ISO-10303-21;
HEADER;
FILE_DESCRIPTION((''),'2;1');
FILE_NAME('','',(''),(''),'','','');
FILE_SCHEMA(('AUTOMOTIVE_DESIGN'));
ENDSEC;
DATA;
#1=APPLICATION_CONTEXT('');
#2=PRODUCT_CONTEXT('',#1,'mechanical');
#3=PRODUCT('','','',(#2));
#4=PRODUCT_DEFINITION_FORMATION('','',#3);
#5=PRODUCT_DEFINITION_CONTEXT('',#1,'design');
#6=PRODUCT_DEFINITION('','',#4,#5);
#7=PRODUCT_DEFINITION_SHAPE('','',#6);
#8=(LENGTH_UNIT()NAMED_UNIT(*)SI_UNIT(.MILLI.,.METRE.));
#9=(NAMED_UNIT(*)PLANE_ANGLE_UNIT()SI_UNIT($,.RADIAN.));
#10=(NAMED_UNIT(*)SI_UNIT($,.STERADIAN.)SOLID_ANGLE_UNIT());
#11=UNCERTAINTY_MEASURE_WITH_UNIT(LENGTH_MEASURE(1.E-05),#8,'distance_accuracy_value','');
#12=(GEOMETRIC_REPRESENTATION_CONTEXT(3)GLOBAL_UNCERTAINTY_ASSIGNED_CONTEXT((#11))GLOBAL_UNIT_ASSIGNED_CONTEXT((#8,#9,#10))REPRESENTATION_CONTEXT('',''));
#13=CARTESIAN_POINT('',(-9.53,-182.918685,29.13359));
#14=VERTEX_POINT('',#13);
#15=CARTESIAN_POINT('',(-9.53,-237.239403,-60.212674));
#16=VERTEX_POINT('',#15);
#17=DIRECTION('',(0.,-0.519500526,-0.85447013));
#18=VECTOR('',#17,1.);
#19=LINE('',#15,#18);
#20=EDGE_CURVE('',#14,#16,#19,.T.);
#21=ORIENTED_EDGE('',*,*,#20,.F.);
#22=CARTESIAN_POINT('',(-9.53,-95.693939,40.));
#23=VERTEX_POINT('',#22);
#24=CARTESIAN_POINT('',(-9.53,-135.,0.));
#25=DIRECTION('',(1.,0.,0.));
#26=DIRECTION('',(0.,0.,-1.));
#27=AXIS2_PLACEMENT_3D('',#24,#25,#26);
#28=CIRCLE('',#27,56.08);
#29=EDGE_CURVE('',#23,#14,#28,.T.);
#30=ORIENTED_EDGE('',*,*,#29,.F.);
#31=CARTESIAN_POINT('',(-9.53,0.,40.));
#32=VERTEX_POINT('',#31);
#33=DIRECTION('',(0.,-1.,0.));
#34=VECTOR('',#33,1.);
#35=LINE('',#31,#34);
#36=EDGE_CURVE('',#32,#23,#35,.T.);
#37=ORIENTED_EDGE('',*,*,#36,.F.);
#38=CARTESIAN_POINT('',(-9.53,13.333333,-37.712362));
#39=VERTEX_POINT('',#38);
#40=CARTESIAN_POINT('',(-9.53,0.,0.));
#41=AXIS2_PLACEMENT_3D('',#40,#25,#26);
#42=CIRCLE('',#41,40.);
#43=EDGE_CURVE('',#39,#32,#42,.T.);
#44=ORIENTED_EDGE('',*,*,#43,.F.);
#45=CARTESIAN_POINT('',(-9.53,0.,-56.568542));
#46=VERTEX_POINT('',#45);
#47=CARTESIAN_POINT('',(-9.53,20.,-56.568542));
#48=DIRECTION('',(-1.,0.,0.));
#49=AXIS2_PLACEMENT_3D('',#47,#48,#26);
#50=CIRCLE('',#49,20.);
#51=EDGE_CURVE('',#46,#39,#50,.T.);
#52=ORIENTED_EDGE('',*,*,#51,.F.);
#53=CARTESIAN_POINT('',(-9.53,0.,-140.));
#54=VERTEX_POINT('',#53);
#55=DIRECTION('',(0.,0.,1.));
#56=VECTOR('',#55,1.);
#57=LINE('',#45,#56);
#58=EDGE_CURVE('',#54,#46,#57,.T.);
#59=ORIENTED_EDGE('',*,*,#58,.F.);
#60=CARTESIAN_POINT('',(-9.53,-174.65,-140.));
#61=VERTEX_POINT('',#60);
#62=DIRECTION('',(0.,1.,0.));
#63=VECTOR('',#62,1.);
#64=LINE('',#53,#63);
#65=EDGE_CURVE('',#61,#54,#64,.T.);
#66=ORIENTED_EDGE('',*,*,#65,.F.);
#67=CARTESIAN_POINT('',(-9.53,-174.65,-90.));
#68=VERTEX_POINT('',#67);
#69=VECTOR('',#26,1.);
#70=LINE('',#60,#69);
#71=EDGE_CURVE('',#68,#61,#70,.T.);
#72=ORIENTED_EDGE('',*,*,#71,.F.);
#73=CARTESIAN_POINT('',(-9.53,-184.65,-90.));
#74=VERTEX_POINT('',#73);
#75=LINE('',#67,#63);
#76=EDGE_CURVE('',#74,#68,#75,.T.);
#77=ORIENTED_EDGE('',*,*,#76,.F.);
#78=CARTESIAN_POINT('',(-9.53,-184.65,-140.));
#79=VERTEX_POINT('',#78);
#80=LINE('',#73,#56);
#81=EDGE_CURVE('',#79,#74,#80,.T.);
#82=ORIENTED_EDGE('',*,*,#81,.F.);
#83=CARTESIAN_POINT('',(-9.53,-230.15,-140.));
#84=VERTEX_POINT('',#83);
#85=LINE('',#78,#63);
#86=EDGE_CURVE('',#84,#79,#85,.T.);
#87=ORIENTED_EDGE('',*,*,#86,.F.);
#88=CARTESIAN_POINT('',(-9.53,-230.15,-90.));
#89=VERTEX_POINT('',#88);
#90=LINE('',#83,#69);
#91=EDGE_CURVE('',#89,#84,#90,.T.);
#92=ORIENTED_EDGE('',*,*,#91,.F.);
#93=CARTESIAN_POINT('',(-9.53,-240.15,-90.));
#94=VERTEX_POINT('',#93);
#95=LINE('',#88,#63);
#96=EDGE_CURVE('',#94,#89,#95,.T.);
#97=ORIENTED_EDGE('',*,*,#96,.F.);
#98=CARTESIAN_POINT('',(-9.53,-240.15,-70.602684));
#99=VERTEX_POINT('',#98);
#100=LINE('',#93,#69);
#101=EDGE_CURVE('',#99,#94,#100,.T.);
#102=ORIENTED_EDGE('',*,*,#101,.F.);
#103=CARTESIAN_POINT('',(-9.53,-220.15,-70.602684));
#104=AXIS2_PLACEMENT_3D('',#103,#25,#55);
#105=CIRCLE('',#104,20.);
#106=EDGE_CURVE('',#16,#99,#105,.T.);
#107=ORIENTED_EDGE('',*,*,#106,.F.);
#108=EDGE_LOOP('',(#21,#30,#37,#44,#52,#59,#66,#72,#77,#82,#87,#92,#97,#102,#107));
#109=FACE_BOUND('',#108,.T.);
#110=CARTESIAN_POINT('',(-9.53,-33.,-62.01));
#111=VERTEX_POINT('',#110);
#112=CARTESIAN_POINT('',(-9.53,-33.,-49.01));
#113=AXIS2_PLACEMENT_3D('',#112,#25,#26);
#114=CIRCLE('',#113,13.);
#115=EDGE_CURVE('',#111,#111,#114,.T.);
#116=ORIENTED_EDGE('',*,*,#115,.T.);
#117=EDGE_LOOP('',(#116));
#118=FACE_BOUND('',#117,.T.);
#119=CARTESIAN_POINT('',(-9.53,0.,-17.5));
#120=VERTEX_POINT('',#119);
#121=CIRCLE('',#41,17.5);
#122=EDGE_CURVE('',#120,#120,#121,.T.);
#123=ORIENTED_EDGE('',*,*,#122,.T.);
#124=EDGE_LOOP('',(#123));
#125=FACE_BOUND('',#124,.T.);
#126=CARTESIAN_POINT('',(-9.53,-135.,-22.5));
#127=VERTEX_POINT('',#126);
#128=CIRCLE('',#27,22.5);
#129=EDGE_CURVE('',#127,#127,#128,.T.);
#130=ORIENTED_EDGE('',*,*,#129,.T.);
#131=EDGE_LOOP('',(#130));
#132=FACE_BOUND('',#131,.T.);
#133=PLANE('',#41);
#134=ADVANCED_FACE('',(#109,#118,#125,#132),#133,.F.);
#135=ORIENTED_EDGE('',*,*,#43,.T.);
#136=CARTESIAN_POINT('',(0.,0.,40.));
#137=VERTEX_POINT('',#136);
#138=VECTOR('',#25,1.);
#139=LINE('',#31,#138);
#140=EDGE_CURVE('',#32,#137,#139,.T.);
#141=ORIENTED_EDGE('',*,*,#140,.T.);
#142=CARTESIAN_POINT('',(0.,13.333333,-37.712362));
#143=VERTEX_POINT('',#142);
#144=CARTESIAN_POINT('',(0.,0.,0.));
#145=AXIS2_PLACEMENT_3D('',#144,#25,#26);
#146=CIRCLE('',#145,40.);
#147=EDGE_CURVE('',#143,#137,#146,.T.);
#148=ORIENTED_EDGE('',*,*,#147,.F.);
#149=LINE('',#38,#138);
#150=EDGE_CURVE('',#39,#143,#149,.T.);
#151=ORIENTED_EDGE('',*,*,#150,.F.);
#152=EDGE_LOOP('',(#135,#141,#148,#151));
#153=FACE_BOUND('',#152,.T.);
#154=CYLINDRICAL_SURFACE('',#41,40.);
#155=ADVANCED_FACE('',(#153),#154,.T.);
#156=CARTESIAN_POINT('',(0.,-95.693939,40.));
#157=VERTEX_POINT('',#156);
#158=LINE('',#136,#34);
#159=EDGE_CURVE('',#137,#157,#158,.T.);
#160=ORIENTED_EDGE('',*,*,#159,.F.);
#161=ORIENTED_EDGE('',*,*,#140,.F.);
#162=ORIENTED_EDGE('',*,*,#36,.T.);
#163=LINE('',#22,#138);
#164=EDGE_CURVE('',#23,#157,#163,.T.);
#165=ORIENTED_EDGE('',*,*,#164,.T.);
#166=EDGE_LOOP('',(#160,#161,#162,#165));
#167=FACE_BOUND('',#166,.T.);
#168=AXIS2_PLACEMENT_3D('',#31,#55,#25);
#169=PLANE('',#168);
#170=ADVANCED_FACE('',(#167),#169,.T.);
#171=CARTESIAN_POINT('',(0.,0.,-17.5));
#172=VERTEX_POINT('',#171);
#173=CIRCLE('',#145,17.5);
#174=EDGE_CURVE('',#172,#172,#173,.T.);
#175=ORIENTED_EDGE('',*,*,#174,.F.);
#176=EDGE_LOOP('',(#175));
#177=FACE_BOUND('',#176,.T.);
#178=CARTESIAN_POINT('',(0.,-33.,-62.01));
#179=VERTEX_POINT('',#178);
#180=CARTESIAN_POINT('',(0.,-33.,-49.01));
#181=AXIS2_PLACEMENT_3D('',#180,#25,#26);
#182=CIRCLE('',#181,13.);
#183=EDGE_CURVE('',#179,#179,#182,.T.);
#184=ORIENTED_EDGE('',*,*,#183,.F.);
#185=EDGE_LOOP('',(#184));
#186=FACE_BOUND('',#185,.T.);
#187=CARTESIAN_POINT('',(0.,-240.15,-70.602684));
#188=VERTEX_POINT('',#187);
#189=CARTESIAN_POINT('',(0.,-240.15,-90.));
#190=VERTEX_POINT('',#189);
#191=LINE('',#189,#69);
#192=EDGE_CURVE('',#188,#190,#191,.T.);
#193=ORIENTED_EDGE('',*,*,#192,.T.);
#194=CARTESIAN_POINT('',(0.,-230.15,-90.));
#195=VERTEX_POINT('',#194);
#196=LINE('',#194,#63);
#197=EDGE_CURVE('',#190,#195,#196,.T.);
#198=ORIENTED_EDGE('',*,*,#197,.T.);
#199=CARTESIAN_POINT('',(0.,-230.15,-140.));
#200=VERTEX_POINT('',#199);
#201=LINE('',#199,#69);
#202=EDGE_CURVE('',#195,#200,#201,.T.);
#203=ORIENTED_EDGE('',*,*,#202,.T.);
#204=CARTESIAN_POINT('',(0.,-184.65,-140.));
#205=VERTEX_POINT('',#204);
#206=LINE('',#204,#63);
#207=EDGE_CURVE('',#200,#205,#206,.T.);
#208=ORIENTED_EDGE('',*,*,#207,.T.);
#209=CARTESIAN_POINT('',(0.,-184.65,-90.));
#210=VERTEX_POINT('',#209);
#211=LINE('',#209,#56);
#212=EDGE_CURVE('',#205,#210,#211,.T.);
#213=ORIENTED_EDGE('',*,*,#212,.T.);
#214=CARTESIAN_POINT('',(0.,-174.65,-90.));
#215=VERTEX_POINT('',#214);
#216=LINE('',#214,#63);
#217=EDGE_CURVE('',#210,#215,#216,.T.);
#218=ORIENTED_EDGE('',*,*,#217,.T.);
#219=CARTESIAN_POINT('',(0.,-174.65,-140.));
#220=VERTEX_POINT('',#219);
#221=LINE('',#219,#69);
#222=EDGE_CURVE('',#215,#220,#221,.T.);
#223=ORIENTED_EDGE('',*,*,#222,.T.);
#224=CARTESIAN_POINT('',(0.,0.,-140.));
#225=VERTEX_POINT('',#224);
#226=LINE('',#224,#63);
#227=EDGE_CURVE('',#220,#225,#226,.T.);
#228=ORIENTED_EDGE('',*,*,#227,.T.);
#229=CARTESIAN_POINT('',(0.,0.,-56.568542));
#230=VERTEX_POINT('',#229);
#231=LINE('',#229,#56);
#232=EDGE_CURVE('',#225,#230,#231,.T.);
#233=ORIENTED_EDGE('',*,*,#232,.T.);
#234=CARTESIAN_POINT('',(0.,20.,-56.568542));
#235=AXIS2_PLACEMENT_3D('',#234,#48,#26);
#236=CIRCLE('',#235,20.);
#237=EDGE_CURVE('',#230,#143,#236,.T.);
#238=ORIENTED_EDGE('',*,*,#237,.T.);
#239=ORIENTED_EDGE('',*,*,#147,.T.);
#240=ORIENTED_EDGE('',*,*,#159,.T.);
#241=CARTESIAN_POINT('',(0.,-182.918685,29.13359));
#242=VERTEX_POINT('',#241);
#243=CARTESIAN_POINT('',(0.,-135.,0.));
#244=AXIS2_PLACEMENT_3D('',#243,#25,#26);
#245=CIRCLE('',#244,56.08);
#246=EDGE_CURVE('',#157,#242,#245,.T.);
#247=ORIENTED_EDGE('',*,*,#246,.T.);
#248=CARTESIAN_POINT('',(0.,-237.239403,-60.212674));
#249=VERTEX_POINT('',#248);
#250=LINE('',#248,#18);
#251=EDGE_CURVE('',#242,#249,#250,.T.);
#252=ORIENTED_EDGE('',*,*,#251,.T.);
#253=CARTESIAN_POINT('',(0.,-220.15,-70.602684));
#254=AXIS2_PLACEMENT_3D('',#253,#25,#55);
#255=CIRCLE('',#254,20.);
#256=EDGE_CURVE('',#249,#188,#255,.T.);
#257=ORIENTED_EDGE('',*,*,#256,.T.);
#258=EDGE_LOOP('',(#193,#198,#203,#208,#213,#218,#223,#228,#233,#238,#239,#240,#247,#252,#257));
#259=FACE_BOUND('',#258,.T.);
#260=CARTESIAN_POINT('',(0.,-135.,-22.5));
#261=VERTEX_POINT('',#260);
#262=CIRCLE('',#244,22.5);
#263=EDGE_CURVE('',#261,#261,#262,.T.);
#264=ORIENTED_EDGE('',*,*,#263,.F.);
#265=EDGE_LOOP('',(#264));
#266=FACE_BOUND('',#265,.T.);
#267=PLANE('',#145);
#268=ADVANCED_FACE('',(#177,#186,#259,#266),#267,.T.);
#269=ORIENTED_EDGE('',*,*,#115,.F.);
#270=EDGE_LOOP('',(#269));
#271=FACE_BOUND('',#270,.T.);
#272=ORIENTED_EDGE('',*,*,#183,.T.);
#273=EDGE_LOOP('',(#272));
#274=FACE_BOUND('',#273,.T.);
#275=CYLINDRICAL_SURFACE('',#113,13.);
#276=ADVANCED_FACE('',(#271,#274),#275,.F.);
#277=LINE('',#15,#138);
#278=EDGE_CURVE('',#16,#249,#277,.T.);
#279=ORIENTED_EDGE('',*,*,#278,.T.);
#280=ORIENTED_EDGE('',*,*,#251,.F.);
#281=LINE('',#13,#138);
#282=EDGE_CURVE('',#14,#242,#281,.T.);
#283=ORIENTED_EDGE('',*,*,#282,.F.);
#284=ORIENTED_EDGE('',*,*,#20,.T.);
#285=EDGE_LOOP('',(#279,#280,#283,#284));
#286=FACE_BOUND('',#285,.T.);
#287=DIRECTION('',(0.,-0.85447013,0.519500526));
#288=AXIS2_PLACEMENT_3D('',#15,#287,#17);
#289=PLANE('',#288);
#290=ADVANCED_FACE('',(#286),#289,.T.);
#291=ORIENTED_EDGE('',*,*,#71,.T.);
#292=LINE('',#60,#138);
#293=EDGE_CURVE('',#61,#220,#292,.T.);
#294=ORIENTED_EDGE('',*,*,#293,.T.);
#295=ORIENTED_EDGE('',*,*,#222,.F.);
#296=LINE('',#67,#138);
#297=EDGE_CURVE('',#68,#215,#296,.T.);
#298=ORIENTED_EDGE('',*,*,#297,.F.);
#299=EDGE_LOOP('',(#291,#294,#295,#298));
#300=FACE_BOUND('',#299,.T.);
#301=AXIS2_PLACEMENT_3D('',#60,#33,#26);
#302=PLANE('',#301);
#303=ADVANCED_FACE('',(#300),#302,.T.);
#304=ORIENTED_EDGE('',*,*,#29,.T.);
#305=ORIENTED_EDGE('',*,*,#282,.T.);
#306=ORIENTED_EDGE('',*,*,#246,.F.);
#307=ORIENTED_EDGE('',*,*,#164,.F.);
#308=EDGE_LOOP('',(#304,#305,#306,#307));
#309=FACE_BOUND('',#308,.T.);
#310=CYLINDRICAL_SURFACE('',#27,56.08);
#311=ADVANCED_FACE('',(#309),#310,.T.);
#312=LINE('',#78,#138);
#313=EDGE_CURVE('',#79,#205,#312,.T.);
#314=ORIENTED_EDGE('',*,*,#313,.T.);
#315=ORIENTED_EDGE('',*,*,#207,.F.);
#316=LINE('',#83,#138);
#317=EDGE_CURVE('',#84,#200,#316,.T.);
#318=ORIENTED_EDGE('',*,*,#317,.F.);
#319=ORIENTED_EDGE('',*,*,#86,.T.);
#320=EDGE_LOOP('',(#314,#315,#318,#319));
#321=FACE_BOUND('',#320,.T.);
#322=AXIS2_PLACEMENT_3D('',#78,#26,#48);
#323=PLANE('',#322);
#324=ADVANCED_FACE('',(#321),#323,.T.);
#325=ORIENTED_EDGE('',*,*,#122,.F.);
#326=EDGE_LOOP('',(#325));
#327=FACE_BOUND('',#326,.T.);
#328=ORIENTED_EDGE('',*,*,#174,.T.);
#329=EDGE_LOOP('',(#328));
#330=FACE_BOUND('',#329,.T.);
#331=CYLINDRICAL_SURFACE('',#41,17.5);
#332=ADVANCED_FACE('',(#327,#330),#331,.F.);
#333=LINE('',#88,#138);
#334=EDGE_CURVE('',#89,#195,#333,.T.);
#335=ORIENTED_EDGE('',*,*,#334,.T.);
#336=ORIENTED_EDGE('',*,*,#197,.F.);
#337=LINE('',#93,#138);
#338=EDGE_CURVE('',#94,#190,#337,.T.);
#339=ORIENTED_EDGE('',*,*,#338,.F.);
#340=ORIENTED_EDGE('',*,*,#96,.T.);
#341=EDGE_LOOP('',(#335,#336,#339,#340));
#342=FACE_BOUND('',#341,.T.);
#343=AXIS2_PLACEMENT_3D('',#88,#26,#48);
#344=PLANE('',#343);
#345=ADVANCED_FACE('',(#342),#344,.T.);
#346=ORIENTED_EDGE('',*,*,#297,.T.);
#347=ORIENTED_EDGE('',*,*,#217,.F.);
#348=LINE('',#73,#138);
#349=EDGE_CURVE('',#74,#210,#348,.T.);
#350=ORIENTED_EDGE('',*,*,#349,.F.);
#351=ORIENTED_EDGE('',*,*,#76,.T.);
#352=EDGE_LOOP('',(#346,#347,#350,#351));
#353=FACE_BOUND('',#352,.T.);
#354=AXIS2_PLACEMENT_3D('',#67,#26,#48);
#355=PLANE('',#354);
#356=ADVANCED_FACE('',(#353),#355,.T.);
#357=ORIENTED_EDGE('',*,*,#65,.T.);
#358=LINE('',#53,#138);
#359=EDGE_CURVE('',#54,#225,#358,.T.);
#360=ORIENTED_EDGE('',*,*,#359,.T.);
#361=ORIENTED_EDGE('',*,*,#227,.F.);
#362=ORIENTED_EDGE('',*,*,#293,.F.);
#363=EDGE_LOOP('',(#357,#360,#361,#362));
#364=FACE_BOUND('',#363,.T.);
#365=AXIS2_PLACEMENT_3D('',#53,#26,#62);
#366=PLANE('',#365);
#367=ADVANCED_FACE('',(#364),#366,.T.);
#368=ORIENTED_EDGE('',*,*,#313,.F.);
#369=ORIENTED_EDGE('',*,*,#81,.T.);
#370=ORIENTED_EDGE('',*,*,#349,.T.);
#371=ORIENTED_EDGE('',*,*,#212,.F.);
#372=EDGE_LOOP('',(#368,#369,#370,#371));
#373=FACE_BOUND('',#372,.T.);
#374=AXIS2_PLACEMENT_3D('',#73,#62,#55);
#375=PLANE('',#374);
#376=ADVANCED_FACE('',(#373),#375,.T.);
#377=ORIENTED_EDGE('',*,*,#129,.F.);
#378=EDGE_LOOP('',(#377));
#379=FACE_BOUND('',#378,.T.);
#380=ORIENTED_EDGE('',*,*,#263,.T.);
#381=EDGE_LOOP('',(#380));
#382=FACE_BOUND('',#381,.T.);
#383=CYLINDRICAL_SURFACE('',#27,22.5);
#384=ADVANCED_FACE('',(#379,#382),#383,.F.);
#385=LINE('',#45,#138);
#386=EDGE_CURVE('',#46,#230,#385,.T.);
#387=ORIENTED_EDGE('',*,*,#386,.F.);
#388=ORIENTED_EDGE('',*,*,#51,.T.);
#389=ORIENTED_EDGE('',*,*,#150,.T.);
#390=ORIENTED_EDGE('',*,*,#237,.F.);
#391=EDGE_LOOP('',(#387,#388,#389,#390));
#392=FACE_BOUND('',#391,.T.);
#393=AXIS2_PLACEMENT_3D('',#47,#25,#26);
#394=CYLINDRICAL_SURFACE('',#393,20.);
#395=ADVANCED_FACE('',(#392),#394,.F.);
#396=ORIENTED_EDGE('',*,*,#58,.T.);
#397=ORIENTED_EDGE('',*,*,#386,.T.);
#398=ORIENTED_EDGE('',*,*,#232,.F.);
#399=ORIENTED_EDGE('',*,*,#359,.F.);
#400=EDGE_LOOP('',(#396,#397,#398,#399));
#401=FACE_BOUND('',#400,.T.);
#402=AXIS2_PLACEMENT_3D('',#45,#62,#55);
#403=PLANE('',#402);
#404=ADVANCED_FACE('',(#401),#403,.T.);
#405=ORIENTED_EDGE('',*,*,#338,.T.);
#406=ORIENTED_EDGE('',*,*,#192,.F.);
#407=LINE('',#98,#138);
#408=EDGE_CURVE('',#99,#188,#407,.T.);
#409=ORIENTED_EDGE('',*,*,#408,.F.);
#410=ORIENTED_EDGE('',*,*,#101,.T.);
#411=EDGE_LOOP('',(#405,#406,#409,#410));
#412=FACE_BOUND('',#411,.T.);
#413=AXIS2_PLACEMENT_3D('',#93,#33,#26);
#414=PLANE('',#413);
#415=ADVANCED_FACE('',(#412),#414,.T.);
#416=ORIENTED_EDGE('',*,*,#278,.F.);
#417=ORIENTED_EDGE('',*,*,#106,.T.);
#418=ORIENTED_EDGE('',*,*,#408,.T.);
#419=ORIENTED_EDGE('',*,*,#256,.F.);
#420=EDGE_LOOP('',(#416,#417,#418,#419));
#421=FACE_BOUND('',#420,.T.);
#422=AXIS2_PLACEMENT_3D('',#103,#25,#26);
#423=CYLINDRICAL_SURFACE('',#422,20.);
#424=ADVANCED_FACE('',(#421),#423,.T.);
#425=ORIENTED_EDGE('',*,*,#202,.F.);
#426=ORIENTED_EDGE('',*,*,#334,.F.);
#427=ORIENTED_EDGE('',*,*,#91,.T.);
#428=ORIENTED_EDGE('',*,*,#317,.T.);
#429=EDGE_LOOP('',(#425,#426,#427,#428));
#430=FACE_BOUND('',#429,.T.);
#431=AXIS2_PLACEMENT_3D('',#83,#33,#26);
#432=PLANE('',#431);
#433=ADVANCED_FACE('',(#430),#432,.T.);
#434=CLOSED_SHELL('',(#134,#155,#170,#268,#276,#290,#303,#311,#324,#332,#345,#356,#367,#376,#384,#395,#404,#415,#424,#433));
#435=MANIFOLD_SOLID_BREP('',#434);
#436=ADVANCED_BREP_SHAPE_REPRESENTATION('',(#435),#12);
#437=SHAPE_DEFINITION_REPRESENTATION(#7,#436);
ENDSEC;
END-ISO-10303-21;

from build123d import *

# Parameters (mm, degrees)
ESBO_O1_R          = 17.5
ESBO_O1_R_2        = 22.5
ESBO_O1_R_3        = 13
FLANGE_BASE1_DEPTH = 9.53


# Sheet-metal steps are written as plain solids
with BuildPart() as part:
    # Esboço1 → Flange-base1 (new body)
    with BuildSketch(Plane(origin=(0, 0, 0), x_dir=(0, 0, -1), z_dir=(1, 0, 0))):
        with BuildLine():
            Line((-40, 0), (-40, -95.693939399))
            ThreePointArc((-40, -95.693939399), (-55.649819015, -141.93282364), (-29.1335895, -182.918684903))
            Line((-29.1335895, -182.918684903), (60.212673691, -237.239402604))
            ThreePointArc((60.212673691, -237.239402604), (65.207688943, -239.408609141), (70.602684212, -240.15))
            Line((70.602684212, -240.15), (90, -240.15))
            Line((90, -240.15), (90, -230.15))
            Line((90, -230.15), (140, -230.15))
            Line((140, -230.15), (140, -184.65))
            Line((140, -184.65), (90, -184.65))
            Line((90, -184.65), (90, -174.65))
            Line((90, -174.65), (140, -174.65))
            Line((140, -174.65), (140, 0))
            Line((140, 0), (56.568542495, 0))
            ThreePointArc((56.568542495, 0), (45.021537111, 3.670068381), (37.712361663, 13.333333333))
            ThreePointArc((37.712361663, 13.333333333), (-6.764079149, 39.423942386), (-40, 0))
        make_face()
        Circle(ESBO_O1_R, mode=Mode.SUBTRACT)
        with Locations((0, -135)):
            Circle(ESBO_O1_R_2, mode=Mode.SUBTRACT)
        with Locations((49.01, -33)):
            Circle(ESBO_O1_R_3, mode=Mode.SUBTRACT)
    extrude(amount=-FLANGE_BASE1_DEPTH)


solid = part.part
